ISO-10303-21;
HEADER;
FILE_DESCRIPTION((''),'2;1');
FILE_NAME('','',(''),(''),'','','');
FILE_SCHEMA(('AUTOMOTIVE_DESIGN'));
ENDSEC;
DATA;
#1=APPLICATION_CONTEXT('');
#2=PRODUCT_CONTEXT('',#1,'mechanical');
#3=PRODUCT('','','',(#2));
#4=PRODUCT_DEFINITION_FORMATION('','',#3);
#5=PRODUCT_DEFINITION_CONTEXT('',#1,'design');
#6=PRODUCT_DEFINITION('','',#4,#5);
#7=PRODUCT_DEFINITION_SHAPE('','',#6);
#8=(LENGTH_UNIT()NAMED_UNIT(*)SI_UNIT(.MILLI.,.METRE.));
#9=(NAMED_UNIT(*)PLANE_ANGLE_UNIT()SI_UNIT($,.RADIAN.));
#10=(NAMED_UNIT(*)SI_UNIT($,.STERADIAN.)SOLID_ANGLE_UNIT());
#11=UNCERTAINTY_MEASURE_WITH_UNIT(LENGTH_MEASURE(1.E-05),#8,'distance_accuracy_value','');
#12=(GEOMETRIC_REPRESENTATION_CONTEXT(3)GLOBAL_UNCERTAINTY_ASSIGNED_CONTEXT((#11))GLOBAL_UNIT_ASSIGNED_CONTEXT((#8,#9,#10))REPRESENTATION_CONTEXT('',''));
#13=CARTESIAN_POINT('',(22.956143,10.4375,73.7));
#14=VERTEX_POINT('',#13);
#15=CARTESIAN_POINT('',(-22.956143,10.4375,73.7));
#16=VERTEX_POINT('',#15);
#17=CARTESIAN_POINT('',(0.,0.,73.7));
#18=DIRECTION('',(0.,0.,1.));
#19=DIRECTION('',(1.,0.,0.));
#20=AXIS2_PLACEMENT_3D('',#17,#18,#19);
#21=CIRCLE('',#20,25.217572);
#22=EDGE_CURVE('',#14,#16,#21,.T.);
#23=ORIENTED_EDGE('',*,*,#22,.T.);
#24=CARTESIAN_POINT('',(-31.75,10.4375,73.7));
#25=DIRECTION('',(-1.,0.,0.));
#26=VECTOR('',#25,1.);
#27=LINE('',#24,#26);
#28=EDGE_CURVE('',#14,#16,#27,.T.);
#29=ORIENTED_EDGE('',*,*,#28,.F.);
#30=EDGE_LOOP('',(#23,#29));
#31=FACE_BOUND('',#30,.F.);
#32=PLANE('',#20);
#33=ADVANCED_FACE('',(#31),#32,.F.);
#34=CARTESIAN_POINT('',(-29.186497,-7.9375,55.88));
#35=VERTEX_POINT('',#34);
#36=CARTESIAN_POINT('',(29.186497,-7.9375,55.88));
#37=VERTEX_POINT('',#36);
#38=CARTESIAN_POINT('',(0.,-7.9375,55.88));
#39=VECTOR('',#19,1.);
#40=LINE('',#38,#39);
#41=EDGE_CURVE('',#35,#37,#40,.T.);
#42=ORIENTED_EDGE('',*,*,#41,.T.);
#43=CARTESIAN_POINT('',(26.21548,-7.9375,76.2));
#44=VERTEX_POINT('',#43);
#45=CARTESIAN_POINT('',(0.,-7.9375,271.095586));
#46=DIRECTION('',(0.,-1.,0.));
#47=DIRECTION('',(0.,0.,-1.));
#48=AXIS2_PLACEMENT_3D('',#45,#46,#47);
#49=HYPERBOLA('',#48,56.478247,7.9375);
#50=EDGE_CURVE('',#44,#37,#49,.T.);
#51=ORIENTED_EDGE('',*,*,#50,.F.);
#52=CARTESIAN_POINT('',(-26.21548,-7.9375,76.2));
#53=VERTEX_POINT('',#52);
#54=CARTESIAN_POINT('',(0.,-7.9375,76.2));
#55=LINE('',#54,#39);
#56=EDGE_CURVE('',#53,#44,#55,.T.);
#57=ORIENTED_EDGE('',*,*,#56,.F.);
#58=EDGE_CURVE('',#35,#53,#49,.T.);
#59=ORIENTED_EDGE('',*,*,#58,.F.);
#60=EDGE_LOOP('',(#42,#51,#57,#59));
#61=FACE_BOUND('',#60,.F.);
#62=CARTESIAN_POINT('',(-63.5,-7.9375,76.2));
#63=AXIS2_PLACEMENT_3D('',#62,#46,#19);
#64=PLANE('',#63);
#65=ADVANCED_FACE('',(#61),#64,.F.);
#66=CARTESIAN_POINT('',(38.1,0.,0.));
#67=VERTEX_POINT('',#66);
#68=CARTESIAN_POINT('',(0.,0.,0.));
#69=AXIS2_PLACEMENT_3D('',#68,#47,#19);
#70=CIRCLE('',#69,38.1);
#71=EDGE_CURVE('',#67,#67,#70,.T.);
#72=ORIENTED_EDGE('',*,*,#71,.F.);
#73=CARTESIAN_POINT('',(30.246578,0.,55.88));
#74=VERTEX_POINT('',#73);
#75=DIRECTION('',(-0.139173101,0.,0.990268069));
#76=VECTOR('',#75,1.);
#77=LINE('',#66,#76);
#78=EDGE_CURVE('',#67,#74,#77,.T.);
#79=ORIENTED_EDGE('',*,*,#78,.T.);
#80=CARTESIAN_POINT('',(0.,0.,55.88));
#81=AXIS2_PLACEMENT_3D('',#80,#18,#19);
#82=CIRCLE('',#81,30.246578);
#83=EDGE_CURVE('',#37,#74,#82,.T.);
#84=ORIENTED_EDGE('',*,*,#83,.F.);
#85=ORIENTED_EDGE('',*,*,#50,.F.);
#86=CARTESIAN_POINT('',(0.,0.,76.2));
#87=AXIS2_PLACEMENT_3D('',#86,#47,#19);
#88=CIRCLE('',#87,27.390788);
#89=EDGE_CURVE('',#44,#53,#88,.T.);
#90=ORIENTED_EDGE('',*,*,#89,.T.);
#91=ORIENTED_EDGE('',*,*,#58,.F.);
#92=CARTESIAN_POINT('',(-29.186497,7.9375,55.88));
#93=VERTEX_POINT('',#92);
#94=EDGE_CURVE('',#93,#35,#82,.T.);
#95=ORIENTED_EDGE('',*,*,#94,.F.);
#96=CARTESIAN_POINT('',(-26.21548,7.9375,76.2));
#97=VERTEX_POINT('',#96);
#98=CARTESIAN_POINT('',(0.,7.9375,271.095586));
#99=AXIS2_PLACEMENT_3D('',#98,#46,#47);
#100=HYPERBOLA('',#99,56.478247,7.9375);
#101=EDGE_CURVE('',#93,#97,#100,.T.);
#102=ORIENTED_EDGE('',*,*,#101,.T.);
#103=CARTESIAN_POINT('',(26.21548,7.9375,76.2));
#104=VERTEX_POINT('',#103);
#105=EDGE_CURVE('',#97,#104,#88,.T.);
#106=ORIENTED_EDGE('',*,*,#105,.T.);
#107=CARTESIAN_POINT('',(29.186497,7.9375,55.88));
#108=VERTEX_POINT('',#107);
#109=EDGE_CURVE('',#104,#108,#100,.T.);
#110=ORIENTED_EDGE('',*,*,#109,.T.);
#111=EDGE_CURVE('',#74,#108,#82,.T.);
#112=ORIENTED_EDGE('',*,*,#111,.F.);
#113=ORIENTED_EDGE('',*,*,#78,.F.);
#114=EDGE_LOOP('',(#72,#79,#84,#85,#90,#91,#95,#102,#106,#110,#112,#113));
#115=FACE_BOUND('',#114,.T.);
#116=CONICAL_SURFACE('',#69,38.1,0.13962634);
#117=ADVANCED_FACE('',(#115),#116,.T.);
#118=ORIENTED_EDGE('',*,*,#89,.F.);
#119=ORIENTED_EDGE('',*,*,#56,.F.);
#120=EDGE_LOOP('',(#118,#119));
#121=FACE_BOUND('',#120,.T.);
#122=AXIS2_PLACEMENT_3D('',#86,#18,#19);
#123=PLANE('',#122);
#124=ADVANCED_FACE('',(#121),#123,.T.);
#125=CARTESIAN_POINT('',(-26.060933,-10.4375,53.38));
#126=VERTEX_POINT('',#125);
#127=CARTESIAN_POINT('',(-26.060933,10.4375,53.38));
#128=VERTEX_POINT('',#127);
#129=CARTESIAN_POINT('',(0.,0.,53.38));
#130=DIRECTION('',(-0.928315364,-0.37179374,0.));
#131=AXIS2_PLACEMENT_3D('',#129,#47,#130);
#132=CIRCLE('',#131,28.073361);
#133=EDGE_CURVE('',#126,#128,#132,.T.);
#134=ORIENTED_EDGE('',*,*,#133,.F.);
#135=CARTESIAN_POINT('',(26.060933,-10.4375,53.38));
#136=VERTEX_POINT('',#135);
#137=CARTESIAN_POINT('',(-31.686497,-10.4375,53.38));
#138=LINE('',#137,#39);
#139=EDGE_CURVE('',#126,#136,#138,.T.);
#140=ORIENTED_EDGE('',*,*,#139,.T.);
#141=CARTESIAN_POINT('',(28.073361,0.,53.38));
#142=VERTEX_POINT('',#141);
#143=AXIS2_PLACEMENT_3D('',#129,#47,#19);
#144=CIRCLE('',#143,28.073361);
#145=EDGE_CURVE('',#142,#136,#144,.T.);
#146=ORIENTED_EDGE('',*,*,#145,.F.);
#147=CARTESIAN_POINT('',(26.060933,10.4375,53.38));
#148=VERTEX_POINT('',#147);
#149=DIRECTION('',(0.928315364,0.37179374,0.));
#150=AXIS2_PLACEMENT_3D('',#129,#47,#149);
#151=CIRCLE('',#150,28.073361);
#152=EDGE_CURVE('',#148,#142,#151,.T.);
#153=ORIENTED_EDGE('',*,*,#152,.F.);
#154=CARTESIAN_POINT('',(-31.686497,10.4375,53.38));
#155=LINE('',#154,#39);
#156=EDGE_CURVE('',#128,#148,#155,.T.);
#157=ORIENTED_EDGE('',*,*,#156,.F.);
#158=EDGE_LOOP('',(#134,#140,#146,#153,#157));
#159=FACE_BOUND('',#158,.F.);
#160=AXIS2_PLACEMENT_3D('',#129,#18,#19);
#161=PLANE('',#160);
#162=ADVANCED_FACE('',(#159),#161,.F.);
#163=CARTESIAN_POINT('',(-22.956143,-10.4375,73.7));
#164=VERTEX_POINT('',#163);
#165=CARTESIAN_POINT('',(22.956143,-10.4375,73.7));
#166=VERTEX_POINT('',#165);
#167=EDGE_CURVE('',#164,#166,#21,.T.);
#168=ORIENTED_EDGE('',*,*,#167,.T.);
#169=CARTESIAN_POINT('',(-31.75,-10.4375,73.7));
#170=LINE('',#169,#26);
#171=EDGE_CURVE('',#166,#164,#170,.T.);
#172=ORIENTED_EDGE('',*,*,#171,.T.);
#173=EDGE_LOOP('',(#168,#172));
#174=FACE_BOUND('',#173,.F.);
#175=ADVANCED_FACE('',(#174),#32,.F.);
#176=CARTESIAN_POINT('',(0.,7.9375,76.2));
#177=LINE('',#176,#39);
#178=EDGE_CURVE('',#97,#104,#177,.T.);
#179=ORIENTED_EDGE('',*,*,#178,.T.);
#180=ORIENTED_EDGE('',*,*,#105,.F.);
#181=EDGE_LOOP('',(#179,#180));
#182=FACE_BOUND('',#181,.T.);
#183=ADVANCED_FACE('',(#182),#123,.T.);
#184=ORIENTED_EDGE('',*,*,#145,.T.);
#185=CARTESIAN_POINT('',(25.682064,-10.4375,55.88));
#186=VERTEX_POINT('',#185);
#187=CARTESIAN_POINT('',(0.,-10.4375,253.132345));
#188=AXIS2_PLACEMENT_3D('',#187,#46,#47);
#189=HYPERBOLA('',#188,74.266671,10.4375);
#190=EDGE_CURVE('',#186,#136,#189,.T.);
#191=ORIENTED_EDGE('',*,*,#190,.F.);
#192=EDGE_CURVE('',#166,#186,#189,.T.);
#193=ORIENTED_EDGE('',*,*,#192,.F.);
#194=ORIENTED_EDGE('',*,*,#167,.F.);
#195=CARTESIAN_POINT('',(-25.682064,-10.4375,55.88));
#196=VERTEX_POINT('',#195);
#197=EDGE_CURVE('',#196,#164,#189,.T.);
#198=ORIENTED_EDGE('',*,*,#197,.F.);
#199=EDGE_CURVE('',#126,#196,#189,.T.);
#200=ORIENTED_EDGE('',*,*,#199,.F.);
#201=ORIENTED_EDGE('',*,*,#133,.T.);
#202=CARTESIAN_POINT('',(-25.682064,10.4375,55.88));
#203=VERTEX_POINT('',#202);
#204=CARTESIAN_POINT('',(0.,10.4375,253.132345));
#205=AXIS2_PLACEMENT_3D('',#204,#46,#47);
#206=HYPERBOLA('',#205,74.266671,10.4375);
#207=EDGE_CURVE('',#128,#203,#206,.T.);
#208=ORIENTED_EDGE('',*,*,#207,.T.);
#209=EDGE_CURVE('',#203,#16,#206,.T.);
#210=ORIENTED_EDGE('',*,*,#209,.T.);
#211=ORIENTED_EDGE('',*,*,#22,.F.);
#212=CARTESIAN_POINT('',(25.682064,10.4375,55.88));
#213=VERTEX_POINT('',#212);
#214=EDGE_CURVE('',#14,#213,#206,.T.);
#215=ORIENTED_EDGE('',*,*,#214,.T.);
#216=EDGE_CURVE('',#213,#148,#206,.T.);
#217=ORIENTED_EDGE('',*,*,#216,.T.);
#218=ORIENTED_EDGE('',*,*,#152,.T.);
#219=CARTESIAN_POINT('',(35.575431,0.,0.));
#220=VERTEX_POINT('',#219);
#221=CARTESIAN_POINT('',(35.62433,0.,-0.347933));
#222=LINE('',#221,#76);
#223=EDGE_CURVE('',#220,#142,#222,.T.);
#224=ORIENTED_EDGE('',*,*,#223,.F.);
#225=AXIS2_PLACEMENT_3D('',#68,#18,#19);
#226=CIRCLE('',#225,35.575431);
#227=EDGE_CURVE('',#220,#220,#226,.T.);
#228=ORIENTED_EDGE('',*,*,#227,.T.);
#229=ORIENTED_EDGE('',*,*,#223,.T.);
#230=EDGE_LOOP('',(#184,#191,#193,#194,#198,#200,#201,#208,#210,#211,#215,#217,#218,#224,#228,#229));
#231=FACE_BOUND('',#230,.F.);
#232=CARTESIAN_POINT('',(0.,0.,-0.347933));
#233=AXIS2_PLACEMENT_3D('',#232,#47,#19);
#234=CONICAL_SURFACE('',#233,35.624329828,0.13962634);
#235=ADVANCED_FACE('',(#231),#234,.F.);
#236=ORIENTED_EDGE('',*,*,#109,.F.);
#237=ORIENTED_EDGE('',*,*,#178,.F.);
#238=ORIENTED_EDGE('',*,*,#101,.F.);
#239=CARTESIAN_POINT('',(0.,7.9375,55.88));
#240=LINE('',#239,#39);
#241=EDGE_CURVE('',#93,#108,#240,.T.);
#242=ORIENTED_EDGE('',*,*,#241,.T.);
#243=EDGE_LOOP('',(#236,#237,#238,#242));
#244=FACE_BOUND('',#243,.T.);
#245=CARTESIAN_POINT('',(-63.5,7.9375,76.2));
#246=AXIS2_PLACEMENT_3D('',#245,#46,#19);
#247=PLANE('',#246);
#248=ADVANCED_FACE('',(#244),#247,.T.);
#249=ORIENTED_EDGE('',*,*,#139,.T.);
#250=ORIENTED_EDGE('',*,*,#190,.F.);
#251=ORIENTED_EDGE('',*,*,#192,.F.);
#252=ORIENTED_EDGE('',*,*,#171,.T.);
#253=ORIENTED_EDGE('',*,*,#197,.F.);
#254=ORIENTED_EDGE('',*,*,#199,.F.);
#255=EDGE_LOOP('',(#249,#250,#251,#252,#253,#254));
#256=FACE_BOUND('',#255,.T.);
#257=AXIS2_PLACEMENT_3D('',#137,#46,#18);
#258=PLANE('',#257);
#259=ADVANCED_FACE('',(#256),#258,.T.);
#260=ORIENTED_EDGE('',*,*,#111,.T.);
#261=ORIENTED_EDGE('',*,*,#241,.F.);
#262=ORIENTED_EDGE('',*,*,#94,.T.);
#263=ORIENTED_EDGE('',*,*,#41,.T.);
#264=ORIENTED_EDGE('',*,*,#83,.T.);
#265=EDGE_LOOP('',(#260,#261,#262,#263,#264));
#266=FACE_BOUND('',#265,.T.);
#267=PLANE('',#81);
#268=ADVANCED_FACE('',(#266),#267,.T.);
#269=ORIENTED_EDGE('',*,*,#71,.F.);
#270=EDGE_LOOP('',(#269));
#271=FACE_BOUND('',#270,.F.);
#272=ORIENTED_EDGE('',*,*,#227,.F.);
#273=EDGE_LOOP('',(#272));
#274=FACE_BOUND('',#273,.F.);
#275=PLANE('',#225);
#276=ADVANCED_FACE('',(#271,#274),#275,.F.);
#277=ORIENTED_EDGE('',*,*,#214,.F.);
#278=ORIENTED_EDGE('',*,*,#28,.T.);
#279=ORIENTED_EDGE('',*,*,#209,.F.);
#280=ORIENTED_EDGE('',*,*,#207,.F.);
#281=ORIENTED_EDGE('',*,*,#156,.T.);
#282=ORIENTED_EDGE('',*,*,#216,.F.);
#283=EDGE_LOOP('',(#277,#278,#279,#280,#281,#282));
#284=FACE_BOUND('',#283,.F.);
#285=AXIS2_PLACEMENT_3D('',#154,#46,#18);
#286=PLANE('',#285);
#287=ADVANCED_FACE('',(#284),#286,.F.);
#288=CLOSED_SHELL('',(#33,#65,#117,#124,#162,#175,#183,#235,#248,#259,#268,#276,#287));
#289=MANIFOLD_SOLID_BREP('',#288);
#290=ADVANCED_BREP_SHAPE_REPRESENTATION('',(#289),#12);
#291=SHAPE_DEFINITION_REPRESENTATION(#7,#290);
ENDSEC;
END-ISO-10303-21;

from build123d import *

# Parameters (mm, degrees)
F0_R        = 38.1
F1_DEPTH    = 76.2
F1_TAPER    = 8
F2_W        = 127
F2_H        = 15.875
F3_DEPTH    = 20.32
F4_T        = 2.5
F4_T3_DEPTH = 63.3729932057


# Not quite as in the source:
# - a shell that OpenCascade refuses in one call is made with other operations: the cavity is built on its own and cut out


with BuildPart() as f1:
    # F0 (on Top) → F1 (new body)
    with BuildSketch(Plane.XY):
        Circle(F0_R)
    extrude(amount=F1_DEPTH, taper=F1_TAPER)

    # F2 (on face) → F3 (cut)
    with BuildSketch(Plane.XY.offset(76.2)):
        Rectangle(F2_W, F2_H)
    extrude(amount=-F3_DEPTH, mode=Mode.SUBTRACT)

    # F4: shell of thickness 2.5, made by hand


with BuildPart() as f4_core1:
    # F4_t2: copy of F1
    add(f1.part)

    # the walls: a layer under each face that stays
    f4_faces = [f4_core1.faces().sort_by_distance(p)[0] for p in [
        (-32.7453941978, 0, 38.1),
        (0, 0, 55.88),
        (0, 7.9375, 66.04),
        (0, 17.6641441978, 76.2),
        (0, -7.9375, 66.04),
        (0, -17.6641441978, 76.2),
    ]]
    thicken(f4_faces, amount=-F4_T, mode=Mode.SUBTRACT)

    # F4_s4 → F4_t3 (cut)
    with BuildSketch(Plane.YZ.offset(-31.6864966028)):
        Polygon((7.9125, 55.905), (7.9375, 53.38), (10.4375, 53.38), (10.4375, 55.88), align=None)
        Polygon((-7.9125, 55.905), (-7.9375, 53.38), (-10.4375, 53.38), (-10.4375, 55.88), align=None)
    extrude(amount=F4_T3_DEPTH, mode=Mode.SUBTRACT)


with BuildPart() as f1_1:
    add(f1.part)

    # what is left inside the walls is the cavity
    f4_cavity = [f4_core1.part.solids().sort_by_distance(p)[0] for p in [
        (-32.098055, 0, 24.563187),
    ]]
    add(f4_cavity, mode=Mode.SUBTRACT)


solid = f1_1.part
